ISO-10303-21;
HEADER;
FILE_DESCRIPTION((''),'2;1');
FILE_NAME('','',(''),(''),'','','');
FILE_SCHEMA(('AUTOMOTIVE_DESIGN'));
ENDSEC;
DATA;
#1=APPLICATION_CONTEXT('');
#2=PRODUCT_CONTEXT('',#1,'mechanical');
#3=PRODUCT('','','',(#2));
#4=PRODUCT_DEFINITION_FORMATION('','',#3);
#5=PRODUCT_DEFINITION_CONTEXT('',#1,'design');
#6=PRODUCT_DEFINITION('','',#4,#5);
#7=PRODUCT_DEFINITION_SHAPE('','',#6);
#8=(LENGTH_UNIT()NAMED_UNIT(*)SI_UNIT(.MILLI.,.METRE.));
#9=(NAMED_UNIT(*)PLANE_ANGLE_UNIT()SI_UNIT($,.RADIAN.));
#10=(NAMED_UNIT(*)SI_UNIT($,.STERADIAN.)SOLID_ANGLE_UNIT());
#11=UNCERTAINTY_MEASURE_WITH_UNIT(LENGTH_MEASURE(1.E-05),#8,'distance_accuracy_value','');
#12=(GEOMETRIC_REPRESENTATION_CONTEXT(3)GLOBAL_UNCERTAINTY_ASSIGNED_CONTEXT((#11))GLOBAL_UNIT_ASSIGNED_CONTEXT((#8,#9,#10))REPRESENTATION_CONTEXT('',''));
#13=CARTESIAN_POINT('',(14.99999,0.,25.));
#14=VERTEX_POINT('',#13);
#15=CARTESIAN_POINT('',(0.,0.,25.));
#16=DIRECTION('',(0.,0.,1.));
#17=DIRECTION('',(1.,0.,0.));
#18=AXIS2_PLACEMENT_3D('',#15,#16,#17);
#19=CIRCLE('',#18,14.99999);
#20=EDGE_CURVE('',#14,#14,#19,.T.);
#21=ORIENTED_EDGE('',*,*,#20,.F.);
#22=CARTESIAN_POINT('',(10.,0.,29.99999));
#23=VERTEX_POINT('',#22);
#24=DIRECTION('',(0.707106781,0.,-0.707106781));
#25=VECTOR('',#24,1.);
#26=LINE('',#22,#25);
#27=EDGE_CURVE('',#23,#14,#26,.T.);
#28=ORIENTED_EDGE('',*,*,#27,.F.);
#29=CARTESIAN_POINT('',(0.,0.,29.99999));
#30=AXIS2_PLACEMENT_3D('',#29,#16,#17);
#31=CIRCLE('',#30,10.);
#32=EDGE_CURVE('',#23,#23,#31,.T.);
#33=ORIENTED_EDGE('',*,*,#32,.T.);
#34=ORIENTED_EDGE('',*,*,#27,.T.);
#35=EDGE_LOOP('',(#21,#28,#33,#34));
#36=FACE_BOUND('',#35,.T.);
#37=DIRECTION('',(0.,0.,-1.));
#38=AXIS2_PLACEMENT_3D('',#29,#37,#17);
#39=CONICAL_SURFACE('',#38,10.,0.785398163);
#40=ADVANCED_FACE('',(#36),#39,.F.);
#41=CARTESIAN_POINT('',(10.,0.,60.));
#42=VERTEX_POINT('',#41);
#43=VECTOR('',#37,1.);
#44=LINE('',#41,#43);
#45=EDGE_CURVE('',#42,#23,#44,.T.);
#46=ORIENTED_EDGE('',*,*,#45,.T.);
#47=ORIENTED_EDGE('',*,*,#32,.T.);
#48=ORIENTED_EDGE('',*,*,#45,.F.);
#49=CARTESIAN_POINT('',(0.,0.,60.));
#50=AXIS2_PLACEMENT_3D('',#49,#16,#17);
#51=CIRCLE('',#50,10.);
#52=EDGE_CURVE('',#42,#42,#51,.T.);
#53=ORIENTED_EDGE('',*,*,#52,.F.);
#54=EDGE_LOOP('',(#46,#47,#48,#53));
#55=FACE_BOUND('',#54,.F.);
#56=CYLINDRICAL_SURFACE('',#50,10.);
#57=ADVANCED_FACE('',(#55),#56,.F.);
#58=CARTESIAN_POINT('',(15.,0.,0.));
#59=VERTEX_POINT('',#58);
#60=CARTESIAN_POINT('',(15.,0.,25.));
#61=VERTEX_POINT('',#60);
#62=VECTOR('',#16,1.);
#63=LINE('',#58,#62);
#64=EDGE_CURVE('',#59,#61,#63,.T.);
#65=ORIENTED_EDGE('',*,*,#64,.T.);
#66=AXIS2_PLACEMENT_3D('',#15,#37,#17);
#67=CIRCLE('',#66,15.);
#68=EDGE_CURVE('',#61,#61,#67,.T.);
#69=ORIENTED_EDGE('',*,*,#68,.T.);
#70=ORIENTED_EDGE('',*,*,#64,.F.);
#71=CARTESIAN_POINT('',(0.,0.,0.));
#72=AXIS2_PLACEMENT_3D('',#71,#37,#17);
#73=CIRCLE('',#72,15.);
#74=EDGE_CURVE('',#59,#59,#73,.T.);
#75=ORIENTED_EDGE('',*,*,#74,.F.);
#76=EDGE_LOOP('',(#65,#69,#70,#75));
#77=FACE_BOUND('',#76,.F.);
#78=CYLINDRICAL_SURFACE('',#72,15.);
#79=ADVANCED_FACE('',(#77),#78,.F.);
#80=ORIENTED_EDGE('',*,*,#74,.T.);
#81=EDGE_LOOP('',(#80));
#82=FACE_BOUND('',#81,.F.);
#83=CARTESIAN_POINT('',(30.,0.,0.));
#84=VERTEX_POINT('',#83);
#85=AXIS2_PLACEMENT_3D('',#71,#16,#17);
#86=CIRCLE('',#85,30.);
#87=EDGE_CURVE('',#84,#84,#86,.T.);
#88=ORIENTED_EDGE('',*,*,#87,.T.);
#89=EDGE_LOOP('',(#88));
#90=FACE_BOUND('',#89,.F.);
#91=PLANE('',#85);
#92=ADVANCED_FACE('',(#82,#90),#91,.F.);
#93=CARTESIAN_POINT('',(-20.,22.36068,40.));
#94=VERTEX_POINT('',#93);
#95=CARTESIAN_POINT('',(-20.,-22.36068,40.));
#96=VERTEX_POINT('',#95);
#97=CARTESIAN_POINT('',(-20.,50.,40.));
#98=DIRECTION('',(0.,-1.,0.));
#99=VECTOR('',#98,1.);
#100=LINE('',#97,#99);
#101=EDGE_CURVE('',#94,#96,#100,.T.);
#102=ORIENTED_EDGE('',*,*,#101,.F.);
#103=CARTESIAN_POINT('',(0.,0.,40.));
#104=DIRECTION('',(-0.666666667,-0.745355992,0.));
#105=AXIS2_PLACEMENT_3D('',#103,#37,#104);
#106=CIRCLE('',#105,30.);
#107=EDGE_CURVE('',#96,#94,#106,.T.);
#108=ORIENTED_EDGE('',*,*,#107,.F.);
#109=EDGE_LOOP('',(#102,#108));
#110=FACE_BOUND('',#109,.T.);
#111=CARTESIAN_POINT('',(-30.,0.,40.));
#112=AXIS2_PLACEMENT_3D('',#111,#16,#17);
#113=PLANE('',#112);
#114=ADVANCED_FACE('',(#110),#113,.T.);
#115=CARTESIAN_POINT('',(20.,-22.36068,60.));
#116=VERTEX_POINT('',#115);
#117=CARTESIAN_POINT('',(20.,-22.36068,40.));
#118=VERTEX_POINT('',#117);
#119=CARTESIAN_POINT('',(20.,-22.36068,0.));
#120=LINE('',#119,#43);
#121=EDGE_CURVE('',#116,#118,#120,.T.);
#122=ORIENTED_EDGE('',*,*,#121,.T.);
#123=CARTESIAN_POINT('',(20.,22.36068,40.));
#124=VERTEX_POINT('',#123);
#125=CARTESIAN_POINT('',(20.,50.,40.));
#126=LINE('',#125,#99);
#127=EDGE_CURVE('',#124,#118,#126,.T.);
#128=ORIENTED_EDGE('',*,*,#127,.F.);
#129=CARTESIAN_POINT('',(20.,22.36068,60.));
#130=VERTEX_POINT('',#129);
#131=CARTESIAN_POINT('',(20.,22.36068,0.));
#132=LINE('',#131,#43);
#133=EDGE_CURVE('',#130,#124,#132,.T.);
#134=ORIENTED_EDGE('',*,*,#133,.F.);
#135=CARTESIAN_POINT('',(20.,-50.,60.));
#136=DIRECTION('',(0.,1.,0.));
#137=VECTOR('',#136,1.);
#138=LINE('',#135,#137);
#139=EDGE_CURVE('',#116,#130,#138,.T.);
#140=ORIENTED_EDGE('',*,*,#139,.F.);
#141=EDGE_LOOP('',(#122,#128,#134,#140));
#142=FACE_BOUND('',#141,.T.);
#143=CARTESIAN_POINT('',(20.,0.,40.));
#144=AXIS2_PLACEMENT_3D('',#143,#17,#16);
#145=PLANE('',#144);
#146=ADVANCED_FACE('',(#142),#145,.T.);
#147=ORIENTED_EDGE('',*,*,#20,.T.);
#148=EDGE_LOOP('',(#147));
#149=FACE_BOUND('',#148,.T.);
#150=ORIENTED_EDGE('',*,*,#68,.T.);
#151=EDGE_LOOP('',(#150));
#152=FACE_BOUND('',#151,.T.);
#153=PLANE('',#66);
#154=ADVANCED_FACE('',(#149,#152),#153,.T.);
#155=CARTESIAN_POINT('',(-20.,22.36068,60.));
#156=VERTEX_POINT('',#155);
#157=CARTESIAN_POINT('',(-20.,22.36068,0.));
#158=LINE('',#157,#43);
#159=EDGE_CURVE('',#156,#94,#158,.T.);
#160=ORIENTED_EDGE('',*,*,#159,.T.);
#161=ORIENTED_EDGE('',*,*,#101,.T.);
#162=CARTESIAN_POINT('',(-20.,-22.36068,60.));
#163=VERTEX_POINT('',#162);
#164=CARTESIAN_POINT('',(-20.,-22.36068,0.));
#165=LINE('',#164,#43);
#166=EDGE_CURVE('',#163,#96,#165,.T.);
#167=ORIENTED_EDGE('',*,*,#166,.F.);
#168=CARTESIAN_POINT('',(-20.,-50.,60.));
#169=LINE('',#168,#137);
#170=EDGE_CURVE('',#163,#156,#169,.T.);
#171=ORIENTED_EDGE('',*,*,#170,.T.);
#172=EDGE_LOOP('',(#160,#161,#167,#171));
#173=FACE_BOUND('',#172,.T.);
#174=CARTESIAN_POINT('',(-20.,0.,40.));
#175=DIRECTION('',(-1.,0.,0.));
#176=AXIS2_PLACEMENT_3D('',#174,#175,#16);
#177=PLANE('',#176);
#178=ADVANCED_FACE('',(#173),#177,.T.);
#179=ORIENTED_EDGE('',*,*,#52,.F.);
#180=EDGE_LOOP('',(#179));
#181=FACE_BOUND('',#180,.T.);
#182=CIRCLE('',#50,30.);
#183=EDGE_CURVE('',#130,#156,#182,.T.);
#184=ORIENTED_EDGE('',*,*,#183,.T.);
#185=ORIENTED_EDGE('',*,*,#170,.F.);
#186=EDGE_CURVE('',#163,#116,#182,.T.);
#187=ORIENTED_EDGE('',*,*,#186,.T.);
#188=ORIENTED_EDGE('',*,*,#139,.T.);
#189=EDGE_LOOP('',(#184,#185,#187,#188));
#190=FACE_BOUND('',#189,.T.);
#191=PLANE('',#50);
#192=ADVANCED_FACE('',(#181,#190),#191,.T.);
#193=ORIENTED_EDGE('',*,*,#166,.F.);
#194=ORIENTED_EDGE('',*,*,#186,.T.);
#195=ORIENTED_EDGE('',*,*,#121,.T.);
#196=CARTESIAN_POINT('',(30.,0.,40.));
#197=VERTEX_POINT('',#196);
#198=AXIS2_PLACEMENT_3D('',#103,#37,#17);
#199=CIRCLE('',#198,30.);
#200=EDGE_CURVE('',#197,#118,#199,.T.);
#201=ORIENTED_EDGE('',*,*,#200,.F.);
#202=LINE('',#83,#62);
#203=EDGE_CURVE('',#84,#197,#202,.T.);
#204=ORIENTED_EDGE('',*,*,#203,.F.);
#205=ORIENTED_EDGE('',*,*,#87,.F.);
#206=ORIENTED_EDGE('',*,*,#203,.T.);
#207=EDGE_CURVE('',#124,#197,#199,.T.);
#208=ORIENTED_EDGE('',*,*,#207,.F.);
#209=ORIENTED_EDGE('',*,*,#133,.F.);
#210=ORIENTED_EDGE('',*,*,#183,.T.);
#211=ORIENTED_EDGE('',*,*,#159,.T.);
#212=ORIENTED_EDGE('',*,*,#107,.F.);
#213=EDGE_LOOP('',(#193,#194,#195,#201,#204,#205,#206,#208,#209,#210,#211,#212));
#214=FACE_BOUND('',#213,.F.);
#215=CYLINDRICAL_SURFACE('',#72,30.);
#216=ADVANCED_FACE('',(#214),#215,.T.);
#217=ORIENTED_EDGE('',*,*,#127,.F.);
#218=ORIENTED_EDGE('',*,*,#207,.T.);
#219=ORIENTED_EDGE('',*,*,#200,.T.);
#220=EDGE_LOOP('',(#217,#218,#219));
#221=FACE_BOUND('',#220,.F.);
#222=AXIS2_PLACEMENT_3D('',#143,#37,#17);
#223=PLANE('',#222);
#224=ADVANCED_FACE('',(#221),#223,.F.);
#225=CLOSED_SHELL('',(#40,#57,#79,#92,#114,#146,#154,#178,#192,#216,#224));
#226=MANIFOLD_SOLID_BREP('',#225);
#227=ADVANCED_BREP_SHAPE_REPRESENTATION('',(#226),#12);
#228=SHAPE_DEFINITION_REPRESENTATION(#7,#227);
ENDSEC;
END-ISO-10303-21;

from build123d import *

# Parameters (mm, degrees)
F0_R     = 30
F1_DEPTH = 60
F2_W     = 10
F2_H     = 20
F3_DEPTH = 50
F4_R     = 15
F5_DEPTH = 25
F6_R     = 10
F7_DEPTH = 100
F8_SIZE  = 4.99999


# Not quite as in the source:
# - a fillet or chamfer is up to 0.001 mm smaller than in the source, because OpenCascade refuses the exact size


with BuildPart() as f1:
    # F0 (on Top) → F1 (new body)
    with BuildSketch(Plane.XY):
        Circle(F0_R)
    extrude(amount=F1_DEPTH)

    # F2 (on Front) → F3 (cut, symmetric)
    with BuildSketch(Plane.XZ):
        with Locations((-25, 50)):
            Rectangle(F2_W, F2_H)
        with Locations((25, 50)):
            Rectangle(F2_W, F2_H)
    extrude(amount=F3_DEPTH, both=True, mode=Mode.SUBTRACT)

    # F4 (on face) → F5 (cut)
    with BuildSketch(Plane(origin=(0, 0, 0), x_dir=(1, 0, 0), z_dir=(0, 0, -1))):
        Circle(F4_R)
    extrude(amount=-F5_DEPTH, mode=Mode.SUBTRACT)

    # F6 (on face) → F7 (cut)
    with BuildSketch(Plane.XY.offset(60)):
        Circle(F6_R)
    extrude(amount=-F7_DEPTH, mode=Mode.SUBTRACT)

    # F8 (size 5 in the source; OpenCascade refuses exactly that, so slightly less here)
    f8_edges = [f1.edges().sort_by_distance(p)[0] for p in [
        (-10, 0, 25),
    ]]
    chamfer(f8_edges, length=F8_SIZE)


solid = f1.part
